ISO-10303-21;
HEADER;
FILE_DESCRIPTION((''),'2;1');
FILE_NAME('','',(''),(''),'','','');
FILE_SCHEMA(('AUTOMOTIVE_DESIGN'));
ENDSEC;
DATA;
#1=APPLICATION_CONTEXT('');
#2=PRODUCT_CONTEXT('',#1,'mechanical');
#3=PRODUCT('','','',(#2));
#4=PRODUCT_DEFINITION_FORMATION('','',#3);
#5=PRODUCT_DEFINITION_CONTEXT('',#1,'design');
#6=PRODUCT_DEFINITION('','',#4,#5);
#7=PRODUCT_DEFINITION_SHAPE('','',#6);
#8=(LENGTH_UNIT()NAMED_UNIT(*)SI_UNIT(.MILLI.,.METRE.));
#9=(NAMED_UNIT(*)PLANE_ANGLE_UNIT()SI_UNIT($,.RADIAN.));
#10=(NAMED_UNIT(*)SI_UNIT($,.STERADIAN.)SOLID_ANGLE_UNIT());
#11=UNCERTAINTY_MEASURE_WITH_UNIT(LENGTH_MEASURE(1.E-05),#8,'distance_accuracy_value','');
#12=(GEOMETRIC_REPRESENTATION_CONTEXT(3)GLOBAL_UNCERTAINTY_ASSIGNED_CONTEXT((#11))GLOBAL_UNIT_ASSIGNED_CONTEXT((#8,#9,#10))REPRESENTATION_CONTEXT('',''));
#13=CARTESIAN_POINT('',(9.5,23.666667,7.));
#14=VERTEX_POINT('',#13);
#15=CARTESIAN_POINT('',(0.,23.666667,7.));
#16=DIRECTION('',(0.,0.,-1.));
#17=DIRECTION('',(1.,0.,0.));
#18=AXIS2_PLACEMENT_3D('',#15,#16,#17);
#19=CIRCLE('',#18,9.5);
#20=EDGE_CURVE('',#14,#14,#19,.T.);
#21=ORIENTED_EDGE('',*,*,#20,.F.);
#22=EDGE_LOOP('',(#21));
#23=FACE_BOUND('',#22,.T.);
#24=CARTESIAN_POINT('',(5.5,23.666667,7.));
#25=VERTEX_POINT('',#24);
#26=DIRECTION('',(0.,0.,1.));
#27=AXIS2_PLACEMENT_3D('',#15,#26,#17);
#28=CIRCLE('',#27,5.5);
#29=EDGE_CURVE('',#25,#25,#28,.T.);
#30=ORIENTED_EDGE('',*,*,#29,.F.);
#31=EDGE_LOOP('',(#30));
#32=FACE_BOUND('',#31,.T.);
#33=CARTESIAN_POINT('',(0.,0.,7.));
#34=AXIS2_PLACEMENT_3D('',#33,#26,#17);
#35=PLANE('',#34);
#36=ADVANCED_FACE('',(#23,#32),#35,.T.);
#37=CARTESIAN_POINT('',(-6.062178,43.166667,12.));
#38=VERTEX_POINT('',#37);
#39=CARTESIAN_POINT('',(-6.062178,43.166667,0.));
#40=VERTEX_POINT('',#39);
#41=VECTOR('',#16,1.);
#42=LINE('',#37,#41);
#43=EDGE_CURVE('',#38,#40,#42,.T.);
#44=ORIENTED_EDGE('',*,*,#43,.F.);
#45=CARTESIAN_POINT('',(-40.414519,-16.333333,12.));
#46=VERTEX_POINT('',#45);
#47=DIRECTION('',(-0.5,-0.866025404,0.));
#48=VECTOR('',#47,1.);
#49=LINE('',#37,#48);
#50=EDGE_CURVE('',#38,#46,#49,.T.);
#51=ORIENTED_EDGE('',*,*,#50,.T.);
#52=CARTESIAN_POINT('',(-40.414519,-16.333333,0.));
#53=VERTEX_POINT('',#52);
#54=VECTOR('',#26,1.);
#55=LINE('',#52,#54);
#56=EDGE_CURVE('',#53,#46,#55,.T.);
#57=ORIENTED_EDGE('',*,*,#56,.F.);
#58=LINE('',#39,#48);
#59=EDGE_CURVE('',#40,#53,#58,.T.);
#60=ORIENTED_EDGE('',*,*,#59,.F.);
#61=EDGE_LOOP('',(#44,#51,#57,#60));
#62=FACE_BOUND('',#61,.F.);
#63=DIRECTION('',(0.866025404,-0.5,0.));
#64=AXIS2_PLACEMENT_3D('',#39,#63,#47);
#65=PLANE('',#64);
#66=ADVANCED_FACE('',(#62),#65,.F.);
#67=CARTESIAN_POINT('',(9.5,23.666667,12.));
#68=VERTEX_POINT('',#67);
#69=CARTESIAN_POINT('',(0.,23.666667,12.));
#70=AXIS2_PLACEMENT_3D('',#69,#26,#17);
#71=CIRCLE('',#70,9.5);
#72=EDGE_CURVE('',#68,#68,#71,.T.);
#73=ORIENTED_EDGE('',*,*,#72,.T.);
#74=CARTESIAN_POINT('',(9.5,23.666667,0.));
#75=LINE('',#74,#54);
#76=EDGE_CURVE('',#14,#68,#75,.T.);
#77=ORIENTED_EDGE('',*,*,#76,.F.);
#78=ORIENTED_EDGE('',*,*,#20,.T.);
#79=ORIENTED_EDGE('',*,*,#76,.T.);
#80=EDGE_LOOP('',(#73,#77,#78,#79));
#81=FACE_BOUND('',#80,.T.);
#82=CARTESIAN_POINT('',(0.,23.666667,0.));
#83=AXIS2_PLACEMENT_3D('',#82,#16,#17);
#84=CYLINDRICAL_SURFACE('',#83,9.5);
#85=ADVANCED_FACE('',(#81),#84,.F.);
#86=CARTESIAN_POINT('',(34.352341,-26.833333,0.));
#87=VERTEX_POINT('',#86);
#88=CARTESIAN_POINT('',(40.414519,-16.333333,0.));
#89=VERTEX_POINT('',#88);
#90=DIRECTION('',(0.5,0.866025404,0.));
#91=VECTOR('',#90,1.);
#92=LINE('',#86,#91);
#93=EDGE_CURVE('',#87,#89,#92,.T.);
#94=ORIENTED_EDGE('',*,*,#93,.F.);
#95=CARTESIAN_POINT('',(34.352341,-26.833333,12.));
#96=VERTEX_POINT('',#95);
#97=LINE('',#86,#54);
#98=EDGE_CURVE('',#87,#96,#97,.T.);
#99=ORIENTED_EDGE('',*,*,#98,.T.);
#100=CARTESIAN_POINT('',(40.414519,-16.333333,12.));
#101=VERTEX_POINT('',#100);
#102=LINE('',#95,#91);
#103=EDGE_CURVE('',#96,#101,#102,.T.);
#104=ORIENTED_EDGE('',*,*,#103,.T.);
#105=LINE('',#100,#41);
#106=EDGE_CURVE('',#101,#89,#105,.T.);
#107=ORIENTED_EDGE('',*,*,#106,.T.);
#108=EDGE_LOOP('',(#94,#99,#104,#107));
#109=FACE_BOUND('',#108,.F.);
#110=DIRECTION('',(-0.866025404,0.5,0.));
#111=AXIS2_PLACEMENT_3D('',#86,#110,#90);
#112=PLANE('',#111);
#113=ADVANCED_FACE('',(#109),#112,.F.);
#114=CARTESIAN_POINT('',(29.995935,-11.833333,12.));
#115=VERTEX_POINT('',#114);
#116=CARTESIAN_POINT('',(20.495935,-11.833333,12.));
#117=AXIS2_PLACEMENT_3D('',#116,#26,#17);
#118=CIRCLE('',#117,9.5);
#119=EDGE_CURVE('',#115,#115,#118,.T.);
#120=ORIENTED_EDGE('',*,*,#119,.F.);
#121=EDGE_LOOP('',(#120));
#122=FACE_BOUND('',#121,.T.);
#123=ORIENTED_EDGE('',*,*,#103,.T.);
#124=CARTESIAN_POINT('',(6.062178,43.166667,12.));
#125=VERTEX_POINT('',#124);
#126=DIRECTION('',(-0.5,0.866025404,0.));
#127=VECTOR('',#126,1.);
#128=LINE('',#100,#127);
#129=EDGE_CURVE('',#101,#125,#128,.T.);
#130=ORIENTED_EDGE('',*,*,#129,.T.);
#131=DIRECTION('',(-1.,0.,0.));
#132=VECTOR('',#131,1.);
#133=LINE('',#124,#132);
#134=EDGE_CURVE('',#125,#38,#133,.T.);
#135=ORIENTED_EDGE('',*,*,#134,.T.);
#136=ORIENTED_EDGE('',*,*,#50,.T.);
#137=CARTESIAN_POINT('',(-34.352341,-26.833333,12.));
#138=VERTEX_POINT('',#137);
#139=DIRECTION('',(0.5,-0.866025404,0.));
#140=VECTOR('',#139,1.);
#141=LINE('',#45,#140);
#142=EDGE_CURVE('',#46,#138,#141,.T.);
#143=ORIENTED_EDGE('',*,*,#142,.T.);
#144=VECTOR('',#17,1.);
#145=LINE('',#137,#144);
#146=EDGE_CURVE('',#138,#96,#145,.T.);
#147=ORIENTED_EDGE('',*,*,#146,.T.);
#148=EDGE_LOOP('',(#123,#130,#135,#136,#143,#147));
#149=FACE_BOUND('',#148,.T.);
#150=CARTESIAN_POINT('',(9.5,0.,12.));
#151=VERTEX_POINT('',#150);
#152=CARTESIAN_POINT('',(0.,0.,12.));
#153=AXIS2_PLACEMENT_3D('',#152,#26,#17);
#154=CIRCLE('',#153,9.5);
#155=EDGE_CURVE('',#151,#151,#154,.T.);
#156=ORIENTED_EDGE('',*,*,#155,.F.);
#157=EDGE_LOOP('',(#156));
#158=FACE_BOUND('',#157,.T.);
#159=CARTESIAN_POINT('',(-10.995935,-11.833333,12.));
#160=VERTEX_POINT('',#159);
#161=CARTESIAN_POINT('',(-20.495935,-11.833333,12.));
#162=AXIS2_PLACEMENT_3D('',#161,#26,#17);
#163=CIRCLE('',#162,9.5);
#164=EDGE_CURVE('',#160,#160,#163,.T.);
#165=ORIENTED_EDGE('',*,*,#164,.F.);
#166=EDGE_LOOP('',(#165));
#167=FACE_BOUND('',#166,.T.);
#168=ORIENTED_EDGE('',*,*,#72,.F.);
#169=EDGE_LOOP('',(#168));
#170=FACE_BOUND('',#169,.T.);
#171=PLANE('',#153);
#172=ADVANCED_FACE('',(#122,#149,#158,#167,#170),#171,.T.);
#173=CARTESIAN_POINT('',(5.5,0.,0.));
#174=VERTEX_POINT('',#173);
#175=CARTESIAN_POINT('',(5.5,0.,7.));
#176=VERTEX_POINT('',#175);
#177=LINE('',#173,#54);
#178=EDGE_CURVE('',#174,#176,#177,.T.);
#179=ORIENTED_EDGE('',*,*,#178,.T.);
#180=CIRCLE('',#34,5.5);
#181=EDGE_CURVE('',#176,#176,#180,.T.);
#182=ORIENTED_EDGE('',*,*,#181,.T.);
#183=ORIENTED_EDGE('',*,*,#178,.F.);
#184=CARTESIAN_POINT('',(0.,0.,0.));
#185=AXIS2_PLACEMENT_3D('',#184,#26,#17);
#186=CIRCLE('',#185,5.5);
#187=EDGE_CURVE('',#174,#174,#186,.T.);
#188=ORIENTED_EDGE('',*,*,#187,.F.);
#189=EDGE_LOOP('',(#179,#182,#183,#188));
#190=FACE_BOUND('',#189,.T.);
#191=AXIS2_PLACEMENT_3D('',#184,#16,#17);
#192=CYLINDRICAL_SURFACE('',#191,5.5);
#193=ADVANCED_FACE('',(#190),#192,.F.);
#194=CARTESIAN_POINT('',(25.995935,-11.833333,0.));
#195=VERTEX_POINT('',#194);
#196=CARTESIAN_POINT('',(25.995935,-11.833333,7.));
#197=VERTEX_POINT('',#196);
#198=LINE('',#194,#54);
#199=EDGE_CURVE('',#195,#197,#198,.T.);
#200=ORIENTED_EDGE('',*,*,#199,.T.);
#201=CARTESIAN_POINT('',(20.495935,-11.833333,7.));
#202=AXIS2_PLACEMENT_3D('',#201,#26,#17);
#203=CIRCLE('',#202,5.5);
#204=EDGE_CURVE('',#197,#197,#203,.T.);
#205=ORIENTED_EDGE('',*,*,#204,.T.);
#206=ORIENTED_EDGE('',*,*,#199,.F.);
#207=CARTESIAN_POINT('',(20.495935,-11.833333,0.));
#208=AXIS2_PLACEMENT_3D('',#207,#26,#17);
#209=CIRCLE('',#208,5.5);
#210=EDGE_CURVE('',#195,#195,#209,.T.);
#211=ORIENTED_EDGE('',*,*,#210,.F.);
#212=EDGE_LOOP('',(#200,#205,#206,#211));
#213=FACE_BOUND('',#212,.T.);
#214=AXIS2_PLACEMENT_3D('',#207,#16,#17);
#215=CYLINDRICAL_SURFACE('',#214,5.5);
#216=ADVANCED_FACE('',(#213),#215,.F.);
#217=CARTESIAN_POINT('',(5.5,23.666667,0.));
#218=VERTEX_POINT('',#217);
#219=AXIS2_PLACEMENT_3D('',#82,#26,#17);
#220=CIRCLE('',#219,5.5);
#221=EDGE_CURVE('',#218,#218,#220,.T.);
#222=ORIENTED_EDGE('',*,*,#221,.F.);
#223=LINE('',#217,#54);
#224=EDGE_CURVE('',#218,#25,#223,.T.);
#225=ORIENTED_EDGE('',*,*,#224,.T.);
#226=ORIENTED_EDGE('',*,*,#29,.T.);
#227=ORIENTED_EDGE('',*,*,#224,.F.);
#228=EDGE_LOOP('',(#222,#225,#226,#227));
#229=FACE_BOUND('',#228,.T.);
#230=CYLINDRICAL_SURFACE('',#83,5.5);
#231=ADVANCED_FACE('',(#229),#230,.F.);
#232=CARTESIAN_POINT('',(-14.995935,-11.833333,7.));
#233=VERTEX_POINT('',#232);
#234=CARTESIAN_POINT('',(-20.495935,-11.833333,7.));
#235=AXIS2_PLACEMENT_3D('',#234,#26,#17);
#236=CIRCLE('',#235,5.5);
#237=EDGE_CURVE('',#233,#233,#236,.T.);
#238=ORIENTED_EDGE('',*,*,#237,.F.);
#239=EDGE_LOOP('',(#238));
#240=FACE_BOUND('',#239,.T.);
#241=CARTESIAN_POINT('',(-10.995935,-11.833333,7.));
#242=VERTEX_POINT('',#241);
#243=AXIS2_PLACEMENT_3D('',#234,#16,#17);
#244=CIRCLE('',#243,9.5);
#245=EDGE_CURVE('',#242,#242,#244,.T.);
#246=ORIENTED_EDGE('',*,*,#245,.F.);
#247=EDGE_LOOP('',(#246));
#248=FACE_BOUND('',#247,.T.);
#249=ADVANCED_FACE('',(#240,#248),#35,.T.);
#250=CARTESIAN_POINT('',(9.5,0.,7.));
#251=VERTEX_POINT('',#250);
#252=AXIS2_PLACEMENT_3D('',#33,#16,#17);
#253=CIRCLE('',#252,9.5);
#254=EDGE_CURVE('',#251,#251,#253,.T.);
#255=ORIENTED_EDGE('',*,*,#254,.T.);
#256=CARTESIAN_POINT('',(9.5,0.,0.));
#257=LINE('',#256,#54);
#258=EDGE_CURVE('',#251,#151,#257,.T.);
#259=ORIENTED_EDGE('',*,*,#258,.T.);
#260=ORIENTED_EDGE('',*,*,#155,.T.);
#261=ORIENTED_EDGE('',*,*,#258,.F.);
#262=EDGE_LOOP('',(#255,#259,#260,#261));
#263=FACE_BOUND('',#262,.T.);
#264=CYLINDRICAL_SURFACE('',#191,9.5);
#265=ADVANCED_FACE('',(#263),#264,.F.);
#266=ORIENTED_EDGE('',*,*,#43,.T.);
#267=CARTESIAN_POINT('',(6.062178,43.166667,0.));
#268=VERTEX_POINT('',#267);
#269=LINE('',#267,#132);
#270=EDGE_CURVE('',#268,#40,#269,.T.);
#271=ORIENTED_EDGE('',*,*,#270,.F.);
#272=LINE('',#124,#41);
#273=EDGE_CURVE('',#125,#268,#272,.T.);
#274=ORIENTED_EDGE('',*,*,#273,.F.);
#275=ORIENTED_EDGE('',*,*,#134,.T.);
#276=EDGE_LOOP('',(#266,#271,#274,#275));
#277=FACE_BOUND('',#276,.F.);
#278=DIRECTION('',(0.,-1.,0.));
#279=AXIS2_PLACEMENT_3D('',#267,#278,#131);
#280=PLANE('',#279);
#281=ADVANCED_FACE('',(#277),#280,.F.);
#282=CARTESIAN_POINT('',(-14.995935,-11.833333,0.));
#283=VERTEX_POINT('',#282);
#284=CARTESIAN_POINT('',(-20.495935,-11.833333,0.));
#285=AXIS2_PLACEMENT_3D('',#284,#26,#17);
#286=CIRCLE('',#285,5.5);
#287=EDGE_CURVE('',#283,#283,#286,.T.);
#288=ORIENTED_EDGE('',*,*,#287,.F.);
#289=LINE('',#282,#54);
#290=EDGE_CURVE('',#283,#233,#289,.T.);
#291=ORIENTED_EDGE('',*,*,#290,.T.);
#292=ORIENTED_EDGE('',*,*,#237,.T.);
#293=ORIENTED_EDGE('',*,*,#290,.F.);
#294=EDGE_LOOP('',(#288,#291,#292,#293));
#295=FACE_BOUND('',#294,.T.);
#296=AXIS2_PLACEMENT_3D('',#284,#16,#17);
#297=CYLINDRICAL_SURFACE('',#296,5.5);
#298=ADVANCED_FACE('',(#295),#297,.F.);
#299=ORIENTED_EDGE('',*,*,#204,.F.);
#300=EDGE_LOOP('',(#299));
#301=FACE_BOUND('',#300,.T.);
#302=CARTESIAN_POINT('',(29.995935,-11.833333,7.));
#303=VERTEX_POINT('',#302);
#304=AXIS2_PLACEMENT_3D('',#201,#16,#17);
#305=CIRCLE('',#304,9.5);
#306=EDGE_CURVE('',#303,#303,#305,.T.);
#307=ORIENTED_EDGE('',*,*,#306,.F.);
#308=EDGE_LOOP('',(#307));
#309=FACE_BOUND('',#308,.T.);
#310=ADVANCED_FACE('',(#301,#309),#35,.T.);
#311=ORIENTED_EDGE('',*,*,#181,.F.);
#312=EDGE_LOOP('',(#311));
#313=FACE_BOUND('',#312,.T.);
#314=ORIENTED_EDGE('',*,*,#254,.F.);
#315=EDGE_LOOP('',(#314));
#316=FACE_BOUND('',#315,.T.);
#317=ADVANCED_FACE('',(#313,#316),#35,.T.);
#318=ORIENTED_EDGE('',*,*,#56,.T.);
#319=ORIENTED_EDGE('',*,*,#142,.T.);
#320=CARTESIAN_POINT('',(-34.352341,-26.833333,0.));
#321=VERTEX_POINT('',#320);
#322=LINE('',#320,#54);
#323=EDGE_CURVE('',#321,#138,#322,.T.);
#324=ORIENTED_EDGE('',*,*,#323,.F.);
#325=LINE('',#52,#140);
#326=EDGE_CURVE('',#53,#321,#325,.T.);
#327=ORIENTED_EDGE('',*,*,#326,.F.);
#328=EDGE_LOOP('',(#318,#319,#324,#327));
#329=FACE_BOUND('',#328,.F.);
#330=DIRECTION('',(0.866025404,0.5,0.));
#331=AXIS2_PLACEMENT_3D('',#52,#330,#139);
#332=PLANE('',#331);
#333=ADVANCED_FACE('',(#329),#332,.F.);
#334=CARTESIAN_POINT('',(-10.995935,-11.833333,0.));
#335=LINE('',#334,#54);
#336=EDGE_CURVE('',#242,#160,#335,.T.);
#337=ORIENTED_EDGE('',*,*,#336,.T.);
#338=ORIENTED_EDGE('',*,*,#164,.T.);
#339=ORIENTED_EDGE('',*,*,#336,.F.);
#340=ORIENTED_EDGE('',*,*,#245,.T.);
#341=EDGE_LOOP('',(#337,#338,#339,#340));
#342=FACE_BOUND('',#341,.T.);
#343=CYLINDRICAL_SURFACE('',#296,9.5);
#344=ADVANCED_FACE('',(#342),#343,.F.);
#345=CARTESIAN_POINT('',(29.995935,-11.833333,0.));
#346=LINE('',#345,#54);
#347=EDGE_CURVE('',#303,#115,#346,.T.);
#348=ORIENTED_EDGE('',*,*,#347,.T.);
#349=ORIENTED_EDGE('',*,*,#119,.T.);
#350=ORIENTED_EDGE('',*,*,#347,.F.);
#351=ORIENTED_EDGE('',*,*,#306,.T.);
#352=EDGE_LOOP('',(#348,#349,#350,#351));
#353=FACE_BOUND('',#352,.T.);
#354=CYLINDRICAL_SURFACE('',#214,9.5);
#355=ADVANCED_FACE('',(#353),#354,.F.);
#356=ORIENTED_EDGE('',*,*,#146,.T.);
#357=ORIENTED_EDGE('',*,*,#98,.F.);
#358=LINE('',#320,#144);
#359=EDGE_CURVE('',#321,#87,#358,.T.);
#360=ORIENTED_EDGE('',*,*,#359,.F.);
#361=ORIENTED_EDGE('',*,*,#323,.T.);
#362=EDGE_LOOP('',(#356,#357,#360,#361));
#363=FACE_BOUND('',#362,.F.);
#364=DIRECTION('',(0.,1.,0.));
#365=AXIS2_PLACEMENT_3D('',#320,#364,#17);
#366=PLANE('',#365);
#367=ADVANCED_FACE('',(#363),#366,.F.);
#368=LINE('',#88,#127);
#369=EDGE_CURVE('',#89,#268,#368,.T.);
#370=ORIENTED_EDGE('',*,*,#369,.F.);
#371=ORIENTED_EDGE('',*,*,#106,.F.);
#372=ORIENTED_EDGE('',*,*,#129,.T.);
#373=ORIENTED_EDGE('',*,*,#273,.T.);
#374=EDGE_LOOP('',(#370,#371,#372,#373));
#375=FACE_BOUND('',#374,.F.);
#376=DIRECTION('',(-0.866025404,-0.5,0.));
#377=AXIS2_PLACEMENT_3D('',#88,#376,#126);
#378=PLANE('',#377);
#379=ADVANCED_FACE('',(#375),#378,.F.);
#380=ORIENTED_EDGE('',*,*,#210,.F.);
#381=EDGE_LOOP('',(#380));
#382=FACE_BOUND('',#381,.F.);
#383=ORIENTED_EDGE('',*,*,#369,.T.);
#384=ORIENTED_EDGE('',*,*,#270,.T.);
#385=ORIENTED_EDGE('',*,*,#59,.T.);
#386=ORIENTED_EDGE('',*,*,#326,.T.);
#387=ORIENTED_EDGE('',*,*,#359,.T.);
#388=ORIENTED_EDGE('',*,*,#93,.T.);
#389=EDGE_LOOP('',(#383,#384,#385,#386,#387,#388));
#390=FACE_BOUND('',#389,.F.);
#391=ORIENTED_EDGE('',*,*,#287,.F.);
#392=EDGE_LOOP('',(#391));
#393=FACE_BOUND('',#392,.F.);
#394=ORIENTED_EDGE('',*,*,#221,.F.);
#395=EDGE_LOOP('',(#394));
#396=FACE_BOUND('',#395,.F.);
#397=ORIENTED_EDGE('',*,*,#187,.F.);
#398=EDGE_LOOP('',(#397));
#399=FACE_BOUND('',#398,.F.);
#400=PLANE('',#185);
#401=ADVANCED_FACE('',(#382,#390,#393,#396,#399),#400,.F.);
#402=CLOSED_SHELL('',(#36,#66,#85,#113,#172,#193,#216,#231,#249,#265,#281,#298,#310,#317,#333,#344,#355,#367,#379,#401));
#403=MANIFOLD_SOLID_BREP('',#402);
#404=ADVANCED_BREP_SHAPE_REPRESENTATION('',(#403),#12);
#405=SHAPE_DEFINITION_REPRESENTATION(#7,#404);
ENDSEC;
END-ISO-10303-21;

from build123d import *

# Parameters (mm, degrees)
F1_R     = 9.5
F1_R_2   = 5.5
F2_DEPTH = 7
F3_DEPTH = 12


# Not quite as in the source:
# - a feature of the source that left no trace in its solid (it failed there, or was rolled back) is left out


with BuildPart() as f2:
    # F1 (on Top) → F2 (new body)
    with BuildSketch(Plane.XY):
        Polygon((-6.0621778265, 43.1666666667), (-40.4145188433, -16.3333333333), (-34.3523410168, -26.8333333333), (34.3523410168, -26.8333333333), (40.4145188433, -16.3333333333), (6.0621778265, 43.1666666667), align=None)
        with Locations((-20.4959345562, -11.8333333333)):
            Circle(F1_R, mode=Mode.SUBTRACT)
        with Locations((20.4959345562, -11.8333333333)):
            Circle(F1_R, mode=Mode.SUBTRACT)
        Circle(F1_R, mode=Mode.SUBTRACT)
        with Locations((0, 23.6666666667)):
            Circle(F1_R, mode=Mode.SUBTRACT)
        with Locations((0, 23.6666666667)):
            Circle(F1_R)
        with Locations((0, 23.6666666667)):
            Circle(F1_R_2, mode=Mode.SUBTRACT)
        with Locations((-20.4959345562, -11.8333333333)):
            Circle(F1_R)
        with Locations((-20.4959345562, -11.8333333333)):
            Circle(F1_R_2, mode=Mode.SUBTRACT)
        Circle(F1_R)
        Circle(F1_R_2, mode=Mode.SUBTRACT)
        with Locations((20.4959345562, -11.8333333333)):
            Circle(F1_R)
        with Locations((20.4959345562, -11.8333333333)):
            Circle(F1_R_2, mode=Mode.SUBTRACT)
    extrude(amount=F2_DEPTH)

    # F1 (on Top) → F3 (join)
    with BuildSketch(Plane.XY):
        Polygon((-6.0621778265, 43.1666666667), (-40.4145188433, -16.3333333333), (-34.3523410168, -26.8333333333), (34.3523410168, -26.8333333333), (40.4145188433, -16.3333333333), (6.0621778265, 43.1666666667), align=None)
        with Locations((-20.4959345562, -11.8333333333)):
            Circle(F1_R, mode=Mode.SUBTRACT)
        with Locations((20.4959345562, -11.8333333333)):
            Circle(F1_R, mode=Mode.SUBTRACT)
        Circle(F1_R, mode=Mode.SUBTRACT)
        with Locations((0, 23.6666666667)):
            Circle(F1_R, mode=Mode.SUBTRACT)
    extrude(amount=F3_DEPTH)


solid = f2.part
